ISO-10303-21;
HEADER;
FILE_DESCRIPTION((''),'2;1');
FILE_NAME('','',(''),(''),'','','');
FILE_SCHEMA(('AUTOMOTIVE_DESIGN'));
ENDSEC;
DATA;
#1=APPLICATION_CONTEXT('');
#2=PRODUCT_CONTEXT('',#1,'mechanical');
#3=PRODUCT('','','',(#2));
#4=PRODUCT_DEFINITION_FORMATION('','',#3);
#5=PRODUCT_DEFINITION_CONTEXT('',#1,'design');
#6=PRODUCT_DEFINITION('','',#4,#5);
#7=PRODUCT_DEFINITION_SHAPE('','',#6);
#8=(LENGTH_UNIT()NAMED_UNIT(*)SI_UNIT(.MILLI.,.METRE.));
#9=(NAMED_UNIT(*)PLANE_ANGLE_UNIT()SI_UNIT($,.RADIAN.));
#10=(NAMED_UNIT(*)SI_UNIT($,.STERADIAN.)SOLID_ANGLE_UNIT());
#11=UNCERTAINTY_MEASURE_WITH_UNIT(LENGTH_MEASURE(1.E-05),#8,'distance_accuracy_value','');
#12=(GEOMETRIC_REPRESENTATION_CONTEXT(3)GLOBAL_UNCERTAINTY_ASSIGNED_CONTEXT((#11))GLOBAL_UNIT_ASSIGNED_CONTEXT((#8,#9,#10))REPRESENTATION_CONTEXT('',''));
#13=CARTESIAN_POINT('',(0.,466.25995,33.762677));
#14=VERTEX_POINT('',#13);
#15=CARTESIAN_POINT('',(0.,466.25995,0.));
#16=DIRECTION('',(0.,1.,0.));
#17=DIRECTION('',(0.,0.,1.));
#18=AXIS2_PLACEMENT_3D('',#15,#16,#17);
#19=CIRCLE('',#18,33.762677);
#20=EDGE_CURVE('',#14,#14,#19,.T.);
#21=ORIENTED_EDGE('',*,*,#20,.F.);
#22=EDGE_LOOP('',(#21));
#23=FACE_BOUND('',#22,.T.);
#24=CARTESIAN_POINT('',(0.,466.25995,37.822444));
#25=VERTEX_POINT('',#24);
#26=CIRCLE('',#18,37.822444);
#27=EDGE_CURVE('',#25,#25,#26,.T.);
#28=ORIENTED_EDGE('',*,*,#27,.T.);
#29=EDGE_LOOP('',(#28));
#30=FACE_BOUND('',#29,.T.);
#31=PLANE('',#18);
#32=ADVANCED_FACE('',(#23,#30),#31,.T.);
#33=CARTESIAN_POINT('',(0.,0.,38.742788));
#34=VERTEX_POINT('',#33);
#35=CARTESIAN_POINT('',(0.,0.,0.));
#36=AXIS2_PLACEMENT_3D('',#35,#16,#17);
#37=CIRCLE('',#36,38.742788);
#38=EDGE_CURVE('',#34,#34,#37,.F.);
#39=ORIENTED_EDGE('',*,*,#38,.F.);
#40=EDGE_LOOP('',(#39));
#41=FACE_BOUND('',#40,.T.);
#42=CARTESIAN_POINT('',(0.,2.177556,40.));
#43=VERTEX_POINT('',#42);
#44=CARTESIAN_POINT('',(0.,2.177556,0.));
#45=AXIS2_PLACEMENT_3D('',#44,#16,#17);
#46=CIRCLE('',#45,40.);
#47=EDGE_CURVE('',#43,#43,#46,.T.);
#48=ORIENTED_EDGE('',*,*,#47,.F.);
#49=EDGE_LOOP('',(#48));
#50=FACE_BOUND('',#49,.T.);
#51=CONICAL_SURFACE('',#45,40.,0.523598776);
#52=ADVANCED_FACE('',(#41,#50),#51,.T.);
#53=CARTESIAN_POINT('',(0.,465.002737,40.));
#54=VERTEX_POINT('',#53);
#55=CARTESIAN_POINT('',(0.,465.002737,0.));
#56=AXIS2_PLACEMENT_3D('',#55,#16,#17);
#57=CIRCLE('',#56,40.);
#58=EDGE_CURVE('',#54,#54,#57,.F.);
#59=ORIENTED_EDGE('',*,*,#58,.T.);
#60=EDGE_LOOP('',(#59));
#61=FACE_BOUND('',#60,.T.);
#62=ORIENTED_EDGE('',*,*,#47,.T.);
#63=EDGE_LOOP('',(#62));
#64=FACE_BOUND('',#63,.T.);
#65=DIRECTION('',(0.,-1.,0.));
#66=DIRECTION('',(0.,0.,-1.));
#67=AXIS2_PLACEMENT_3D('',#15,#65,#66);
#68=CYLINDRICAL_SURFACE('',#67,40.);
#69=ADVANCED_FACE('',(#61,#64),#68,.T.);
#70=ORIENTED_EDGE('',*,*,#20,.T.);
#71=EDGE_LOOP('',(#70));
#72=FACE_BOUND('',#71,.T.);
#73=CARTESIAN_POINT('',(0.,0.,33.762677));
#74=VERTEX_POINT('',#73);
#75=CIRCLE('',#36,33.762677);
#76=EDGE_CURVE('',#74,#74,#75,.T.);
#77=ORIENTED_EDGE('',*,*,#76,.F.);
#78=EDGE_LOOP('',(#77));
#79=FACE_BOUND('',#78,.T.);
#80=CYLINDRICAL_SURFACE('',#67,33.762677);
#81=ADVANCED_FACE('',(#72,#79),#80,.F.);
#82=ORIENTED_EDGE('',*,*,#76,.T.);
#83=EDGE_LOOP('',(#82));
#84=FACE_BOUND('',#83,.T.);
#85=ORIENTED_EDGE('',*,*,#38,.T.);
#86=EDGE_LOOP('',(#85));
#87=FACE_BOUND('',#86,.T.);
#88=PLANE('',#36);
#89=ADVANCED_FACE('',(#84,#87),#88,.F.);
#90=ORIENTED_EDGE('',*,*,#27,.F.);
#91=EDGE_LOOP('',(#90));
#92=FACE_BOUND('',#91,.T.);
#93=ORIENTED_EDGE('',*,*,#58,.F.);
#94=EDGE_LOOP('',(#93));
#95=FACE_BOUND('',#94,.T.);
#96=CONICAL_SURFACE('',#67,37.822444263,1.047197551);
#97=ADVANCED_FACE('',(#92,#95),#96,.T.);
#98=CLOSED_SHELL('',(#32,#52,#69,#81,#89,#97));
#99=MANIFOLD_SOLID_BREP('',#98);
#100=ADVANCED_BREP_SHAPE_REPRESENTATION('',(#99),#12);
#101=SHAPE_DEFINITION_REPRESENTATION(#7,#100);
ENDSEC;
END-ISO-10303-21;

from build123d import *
from OCP.BRepFilletAPI import BRepFilletAPI_MakeChamfer

# Parameters (mm, degrees)
SKETCH1_R           = 40
BOSS_EXTRUDE1_DEPTH = 466.259949835
SKETCH2_R           = 33.762677436
CUT_EXTRUDE1_DEPTH  = 470.678976345
CHAMFER1_SIZE       = 1.257212391
CHAMFER1_SIZE2      = 2.177555737


with BuildPart() as part:
    # Sketch1 → Boss-Extrude1 (new body)
    with BuildSketch(Plane(origin=(0, 0, 0), x_dir=(1, 0, 0), z_dir=(0, 1, 0))):
        Circle(SKETCH1_R)
    extrude(amount=BOSS_EXTRUDE1_DEPTH)

    # Sketch2 → Cut-Extrude1 (cut, through all)
    with BuildSketch(Plane(origin=(0, 0, 0), x_dir=(1, 0, 0), z_dir=(0, 1, 0))):
        Circle(SKETCH2_R)
    extrude(amount=CUT_EXTRUDE1_DEPTH, mode=Mode.SUBTRACT)

    # Chamfer1: one chamfer whose edges measure the first distance from different faces: ONE call of the kernel's chamfer builder (chamfer() names one face for all edges)
    chamfer1_edges_1 = [part.edges().sort_by_distance(p)[0] for p in [
        (-40, 466.259949835, 0),
    ]]
    chamfer1_side_1 = [part.faces().sort_by_distance(p)[0] for p in [
        (-40, 233.129974918, 0),
    ]]
    chamfer1_edges_2 = [part.edges().sort_by_distance(p)[0] for p in [
        (-40, 0, 0),
    ]]
    chamfer1_side_2 = [part.faces().sort_by_distance(p)[0] for p in [
        (-38.86862915, 0, 0),
    ]]
    chamfer1 = BRepFilletAPI_MakeChamfer(part.part.solid().wrapped)
    for e in chamfer1_edges_1:
        chamfer1.Add(CHAMFER1_SIZE, CHAMFER1_SIZE2, e.wrapped, chamfer1_side_1[0].wrapped)  # the first distance lies on this face
    for e in chamfer1_edges_2:
        chamfer1.Add(CHAMFER1_SIZE, CHAMFER1_SIZE2, e.wrapped, chamfer1_side_2[0].wrapped)  # the first distance lies on this face
    add(Compound.cast(chamfer1.Shape()), mode=Mode.REPLACE)


solid = part.part
